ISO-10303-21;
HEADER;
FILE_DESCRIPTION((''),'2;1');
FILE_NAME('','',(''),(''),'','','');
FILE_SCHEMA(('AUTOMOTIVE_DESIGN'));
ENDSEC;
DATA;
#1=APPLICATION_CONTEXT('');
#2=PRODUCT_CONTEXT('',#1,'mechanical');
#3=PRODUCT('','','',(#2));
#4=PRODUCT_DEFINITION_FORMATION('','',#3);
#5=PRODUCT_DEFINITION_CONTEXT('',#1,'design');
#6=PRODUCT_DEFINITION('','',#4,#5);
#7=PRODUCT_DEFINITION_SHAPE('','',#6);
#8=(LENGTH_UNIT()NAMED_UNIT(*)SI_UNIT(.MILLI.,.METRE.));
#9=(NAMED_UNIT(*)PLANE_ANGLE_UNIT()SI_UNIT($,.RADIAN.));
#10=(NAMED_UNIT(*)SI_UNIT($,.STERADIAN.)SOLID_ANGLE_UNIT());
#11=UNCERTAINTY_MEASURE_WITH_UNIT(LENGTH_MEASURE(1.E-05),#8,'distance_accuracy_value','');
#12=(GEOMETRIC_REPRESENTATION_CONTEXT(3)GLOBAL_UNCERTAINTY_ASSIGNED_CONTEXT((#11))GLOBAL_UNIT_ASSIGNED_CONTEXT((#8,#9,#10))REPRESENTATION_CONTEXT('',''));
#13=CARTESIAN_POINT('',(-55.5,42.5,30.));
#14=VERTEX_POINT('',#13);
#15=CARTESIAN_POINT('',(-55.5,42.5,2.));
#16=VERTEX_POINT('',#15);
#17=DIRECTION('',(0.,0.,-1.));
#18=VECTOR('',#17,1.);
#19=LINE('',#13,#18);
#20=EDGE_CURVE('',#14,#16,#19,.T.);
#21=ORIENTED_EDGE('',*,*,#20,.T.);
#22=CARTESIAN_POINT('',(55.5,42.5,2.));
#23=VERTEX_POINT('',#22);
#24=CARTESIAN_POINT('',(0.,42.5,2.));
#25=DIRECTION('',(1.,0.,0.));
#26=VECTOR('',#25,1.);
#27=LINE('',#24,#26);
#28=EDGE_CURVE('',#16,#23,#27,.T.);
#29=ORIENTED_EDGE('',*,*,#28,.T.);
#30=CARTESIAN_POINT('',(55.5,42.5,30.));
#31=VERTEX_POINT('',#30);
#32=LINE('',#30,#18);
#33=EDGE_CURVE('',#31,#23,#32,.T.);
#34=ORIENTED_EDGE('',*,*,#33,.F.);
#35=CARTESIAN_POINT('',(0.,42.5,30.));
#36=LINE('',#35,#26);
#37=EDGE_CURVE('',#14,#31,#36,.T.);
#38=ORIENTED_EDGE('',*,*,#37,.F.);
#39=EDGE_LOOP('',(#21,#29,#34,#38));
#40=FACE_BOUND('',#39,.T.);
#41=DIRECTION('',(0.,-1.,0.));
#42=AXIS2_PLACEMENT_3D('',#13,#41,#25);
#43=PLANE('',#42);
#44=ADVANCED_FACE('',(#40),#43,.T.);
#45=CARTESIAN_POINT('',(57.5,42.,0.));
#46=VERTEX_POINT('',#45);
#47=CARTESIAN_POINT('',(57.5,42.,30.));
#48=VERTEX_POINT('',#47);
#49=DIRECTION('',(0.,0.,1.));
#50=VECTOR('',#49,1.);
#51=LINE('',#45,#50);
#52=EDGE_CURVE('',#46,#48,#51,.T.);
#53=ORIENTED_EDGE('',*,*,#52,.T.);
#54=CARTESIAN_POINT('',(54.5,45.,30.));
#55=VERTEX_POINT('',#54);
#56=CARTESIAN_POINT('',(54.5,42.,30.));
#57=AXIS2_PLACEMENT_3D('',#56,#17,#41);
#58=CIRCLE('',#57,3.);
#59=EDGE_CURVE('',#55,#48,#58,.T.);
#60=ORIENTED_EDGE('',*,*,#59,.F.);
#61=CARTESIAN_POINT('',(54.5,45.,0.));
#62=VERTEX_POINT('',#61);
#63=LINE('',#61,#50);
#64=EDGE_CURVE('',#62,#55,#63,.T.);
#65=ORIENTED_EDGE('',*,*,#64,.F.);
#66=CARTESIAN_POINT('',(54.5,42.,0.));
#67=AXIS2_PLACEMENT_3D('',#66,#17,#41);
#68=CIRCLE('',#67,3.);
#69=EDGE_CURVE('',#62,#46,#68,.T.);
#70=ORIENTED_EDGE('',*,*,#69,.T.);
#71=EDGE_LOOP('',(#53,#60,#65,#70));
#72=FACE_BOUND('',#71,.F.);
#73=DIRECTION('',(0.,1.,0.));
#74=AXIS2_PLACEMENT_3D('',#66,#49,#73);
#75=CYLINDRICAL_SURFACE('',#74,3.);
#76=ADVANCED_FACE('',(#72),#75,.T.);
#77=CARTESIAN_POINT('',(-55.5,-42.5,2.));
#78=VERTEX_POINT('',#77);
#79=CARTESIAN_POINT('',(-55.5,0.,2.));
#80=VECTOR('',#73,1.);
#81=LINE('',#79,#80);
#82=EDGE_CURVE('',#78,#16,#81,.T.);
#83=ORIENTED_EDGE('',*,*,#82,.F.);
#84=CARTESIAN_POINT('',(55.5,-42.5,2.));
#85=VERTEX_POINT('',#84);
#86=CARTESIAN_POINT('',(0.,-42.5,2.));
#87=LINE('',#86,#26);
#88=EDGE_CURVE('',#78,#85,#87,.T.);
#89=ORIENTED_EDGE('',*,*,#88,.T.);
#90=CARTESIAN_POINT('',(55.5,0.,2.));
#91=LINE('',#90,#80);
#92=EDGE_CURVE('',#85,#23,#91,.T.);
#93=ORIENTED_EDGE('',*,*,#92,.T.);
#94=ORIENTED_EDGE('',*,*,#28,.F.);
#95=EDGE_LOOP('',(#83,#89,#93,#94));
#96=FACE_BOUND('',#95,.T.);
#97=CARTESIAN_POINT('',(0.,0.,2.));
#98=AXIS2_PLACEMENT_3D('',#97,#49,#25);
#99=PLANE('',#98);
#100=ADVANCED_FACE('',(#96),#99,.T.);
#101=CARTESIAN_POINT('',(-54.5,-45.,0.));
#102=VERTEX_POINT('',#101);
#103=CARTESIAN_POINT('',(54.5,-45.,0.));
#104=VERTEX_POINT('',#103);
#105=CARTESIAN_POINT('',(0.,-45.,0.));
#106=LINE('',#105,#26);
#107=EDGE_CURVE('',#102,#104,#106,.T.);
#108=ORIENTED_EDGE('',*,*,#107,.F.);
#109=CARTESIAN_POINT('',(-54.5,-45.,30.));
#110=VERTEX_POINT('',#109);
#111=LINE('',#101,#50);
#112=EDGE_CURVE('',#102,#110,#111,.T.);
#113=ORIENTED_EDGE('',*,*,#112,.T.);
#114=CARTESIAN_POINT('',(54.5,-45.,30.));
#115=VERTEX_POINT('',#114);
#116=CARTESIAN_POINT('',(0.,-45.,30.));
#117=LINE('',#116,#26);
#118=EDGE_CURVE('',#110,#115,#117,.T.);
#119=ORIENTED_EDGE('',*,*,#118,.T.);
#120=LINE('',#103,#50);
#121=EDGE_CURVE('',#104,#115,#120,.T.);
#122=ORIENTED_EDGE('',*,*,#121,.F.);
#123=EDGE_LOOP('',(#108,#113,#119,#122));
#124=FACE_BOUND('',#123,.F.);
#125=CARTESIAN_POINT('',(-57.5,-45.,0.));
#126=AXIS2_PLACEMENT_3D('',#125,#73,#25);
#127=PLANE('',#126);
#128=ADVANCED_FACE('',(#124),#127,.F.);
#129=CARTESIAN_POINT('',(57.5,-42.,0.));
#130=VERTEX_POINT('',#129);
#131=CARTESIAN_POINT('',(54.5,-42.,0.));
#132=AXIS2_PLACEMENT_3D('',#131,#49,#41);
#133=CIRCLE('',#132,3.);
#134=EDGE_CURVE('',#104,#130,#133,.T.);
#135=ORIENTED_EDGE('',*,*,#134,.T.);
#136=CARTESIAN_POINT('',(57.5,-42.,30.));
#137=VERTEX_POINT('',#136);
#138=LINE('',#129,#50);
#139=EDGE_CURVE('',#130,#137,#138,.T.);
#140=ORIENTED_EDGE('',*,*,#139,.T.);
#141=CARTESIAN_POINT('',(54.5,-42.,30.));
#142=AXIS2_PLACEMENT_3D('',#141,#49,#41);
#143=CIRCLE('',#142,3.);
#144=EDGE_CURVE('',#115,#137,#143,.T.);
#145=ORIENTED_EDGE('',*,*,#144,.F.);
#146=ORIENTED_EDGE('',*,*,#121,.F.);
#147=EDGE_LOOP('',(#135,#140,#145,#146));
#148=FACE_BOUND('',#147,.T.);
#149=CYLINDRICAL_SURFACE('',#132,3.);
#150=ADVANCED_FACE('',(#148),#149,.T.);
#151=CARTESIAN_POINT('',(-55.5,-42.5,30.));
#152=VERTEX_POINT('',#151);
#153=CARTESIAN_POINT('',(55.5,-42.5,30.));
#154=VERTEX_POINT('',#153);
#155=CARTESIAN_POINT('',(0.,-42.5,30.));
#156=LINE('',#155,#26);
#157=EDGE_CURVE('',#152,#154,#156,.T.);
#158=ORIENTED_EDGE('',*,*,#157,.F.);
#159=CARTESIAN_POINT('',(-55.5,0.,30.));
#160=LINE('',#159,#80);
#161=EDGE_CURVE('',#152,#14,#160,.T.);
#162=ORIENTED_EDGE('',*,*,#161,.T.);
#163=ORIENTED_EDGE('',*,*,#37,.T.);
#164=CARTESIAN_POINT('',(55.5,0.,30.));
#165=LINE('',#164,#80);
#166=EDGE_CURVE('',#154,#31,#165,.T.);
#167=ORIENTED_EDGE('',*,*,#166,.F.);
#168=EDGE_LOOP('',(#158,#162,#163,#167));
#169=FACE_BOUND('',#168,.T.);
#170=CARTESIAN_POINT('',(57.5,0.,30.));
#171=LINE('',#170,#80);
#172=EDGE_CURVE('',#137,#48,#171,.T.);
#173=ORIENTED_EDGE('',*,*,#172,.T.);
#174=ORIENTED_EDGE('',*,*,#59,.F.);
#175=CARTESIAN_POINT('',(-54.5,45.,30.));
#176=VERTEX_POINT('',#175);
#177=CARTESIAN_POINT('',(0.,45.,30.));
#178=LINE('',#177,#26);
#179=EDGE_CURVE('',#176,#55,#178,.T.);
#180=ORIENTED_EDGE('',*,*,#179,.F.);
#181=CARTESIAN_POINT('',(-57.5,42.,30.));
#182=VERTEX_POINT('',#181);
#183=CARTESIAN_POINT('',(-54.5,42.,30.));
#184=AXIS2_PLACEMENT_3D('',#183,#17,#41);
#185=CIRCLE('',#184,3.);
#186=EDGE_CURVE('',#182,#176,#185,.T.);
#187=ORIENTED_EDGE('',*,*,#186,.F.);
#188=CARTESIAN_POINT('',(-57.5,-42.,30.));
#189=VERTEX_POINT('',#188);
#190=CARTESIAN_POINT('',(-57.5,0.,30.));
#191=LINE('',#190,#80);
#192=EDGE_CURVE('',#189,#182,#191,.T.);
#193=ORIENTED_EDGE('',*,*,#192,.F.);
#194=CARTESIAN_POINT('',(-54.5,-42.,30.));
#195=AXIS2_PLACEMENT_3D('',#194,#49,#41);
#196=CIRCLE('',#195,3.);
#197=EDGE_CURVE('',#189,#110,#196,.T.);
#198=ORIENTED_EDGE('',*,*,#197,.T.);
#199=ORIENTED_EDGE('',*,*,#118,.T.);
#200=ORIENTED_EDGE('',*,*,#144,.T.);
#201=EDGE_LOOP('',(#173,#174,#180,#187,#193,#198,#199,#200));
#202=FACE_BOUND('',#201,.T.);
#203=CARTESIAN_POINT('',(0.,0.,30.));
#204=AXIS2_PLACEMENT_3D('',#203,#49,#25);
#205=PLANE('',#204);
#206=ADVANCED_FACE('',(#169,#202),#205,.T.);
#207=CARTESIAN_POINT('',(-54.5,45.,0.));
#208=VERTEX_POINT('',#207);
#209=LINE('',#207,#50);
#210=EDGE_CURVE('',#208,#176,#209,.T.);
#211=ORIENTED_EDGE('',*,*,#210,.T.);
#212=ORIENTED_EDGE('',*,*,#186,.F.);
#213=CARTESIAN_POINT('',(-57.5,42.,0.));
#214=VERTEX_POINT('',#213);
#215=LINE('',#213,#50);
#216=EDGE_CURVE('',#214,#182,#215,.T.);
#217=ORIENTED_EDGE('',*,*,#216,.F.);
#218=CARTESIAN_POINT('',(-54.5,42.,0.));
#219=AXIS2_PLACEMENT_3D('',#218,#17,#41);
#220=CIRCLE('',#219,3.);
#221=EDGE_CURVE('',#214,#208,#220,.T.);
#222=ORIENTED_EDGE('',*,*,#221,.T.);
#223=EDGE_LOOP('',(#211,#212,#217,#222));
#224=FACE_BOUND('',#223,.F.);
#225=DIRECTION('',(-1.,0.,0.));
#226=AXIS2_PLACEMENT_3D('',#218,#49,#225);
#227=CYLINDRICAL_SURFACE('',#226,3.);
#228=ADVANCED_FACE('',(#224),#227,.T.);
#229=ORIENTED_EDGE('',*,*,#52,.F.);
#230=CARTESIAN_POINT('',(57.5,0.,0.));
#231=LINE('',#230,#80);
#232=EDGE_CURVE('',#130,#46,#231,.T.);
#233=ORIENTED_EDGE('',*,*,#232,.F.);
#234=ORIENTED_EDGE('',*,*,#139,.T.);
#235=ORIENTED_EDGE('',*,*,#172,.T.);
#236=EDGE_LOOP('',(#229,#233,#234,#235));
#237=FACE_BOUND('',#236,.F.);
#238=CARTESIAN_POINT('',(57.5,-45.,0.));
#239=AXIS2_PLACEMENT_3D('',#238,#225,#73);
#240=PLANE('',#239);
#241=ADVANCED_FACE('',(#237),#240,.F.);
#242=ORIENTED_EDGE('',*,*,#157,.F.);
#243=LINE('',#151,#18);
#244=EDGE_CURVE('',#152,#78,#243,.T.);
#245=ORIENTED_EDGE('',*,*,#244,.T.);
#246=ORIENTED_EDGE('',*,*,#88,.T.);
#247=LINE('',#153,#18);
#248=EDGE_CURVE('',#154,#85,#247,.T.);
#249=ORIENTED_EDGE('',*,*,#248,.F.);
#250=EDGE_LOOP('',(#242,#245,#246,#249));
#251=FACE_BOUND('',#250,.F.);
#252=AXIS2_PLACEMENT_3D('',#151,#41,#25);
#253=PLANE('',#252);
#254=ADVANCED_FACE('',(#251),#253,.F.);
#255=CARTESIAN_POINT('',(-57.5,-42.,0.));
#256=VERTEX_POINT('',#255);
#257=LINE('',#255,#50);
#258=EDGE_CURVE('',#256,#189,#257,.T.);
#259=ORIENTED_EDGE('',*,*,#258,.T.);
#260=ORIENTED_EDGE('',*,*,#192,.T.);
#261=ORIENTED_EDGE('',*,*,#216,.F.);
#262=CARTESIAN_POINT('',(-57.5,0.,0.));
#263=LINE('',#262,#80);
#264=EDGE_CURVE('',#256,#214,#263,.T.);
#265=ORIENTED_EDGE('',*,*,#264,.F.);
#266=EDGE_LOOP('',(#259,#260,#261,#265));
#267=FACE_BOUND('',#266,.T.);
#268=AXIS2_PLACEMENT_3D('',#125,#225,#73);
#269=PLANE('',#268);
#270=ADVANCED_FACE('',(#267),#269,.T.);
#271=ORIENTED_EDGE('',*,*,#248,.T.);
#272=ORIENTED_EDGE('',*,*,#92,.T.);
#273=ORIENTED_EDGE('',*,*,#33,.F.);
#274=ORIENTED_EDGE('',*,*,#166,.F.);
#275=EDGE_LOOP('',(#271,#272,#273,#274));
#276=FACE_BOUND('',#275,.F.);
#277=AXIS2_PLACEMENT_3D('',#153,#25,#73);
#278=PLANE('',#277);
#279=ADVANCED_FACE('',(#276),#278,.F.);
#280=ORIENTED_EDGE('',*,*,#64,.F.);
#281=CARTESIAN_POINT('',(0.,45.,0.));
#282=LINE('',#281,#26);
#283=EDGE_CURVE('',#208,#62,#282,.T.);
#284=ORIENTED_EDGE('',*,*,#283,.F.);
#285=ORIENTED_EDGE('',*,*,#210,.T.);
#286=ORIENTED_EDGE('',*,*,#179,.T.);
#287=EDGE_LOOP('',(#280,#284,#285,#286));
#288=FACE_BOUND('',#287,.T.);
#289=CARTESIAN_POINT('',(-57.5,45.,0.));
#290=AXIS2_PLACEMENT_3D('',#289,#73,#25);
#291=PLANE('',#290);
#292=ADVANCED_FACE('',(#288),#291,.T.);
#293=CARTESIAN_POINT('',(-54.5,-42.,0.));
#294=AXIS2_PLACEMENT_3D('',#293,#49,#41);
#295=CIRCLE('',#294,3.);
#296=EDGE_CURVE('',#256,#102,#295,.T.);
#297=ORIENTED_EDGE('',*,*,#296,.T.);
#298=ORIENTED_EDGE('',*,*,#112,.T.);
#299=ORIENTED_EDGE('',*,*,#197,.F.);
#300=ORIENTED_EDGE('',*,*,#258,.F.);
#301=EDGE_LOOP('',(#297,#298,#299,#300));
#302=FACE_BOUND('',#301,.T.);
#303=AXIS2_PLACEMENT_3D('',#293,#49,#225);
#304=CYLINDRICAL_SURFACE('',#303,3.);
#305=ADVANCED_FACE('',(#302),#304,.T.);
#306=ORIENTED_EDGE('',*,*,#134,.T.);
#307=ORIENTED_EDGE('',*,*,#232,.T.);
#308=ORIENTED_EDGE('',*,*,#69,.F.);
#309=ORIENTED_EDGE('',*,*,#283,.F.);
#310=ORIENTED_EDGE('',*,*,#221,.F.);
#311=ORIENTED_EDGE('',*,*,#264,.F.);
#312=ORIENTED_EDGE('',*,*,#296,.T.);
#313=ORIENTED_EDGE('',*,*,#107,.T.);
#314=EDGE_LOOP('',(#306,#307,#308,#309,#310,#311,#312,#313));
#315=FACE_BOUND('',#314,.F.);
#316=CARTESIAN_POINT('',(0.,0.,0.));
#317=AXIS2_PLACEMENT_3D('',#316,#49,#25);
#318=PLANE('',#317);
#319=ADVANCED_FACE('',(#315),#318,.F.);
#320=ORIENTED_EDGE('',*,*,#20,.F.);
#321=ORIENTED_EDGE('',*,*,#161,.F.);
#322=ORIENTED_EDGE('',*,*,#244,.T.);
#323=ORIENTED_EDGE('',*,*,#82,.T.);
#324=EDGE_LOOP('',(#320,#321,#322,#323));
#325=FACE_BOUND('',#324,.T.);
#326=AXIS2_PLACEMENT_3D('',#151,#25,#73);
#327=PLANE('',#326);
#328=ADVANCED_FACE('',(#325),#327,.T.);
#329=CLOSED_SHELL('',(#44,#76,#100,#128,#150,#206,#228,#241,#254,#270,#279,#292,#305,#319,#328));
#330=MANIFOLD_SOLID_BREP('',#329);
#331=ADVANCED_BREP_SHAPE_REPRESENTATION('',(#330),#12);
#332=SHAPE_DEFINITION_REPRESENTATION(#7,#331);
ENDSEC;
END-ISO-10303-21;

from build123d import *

# Parameters (mm, degrees)
F0_W     = 115
F0_H     = 90
F1_DEPTH = 30
F3_W     = 111
F3_H     = 85
F4_DEPTH = 28
F5_R     = 3


# Not quite as in the source:
# - a feature names something its author has since deleted; it is built from what else it names


with BuildPart() as f1:
    # F0 (on Top) → F1 (new body)
    with BuildSketch(Plane.XY):
        Rectangle(F0_W, F0_H)
    extrude(amount=F1_DEPTH)

    # F3 (on offset) → F4 (cut)
    with BuildSketch(Plane.XY.offset(30)):
        Rectangle(F3_W, F3_H)
    extrude(amount=-F4_DEPTH, mode=Mode.SUBTRACT)

    # F5
    f5_edges = [f1.edges().sort_by_distance(p)[0] for p in [
        (-57.5, 45, 15),
        (57.5, 45, 15),
        (57.5, -45, 15),
        (-57.5, -45, 15),
    ]]
    fillet(f5_edges, radius=F5_R)


solid = f1.part
